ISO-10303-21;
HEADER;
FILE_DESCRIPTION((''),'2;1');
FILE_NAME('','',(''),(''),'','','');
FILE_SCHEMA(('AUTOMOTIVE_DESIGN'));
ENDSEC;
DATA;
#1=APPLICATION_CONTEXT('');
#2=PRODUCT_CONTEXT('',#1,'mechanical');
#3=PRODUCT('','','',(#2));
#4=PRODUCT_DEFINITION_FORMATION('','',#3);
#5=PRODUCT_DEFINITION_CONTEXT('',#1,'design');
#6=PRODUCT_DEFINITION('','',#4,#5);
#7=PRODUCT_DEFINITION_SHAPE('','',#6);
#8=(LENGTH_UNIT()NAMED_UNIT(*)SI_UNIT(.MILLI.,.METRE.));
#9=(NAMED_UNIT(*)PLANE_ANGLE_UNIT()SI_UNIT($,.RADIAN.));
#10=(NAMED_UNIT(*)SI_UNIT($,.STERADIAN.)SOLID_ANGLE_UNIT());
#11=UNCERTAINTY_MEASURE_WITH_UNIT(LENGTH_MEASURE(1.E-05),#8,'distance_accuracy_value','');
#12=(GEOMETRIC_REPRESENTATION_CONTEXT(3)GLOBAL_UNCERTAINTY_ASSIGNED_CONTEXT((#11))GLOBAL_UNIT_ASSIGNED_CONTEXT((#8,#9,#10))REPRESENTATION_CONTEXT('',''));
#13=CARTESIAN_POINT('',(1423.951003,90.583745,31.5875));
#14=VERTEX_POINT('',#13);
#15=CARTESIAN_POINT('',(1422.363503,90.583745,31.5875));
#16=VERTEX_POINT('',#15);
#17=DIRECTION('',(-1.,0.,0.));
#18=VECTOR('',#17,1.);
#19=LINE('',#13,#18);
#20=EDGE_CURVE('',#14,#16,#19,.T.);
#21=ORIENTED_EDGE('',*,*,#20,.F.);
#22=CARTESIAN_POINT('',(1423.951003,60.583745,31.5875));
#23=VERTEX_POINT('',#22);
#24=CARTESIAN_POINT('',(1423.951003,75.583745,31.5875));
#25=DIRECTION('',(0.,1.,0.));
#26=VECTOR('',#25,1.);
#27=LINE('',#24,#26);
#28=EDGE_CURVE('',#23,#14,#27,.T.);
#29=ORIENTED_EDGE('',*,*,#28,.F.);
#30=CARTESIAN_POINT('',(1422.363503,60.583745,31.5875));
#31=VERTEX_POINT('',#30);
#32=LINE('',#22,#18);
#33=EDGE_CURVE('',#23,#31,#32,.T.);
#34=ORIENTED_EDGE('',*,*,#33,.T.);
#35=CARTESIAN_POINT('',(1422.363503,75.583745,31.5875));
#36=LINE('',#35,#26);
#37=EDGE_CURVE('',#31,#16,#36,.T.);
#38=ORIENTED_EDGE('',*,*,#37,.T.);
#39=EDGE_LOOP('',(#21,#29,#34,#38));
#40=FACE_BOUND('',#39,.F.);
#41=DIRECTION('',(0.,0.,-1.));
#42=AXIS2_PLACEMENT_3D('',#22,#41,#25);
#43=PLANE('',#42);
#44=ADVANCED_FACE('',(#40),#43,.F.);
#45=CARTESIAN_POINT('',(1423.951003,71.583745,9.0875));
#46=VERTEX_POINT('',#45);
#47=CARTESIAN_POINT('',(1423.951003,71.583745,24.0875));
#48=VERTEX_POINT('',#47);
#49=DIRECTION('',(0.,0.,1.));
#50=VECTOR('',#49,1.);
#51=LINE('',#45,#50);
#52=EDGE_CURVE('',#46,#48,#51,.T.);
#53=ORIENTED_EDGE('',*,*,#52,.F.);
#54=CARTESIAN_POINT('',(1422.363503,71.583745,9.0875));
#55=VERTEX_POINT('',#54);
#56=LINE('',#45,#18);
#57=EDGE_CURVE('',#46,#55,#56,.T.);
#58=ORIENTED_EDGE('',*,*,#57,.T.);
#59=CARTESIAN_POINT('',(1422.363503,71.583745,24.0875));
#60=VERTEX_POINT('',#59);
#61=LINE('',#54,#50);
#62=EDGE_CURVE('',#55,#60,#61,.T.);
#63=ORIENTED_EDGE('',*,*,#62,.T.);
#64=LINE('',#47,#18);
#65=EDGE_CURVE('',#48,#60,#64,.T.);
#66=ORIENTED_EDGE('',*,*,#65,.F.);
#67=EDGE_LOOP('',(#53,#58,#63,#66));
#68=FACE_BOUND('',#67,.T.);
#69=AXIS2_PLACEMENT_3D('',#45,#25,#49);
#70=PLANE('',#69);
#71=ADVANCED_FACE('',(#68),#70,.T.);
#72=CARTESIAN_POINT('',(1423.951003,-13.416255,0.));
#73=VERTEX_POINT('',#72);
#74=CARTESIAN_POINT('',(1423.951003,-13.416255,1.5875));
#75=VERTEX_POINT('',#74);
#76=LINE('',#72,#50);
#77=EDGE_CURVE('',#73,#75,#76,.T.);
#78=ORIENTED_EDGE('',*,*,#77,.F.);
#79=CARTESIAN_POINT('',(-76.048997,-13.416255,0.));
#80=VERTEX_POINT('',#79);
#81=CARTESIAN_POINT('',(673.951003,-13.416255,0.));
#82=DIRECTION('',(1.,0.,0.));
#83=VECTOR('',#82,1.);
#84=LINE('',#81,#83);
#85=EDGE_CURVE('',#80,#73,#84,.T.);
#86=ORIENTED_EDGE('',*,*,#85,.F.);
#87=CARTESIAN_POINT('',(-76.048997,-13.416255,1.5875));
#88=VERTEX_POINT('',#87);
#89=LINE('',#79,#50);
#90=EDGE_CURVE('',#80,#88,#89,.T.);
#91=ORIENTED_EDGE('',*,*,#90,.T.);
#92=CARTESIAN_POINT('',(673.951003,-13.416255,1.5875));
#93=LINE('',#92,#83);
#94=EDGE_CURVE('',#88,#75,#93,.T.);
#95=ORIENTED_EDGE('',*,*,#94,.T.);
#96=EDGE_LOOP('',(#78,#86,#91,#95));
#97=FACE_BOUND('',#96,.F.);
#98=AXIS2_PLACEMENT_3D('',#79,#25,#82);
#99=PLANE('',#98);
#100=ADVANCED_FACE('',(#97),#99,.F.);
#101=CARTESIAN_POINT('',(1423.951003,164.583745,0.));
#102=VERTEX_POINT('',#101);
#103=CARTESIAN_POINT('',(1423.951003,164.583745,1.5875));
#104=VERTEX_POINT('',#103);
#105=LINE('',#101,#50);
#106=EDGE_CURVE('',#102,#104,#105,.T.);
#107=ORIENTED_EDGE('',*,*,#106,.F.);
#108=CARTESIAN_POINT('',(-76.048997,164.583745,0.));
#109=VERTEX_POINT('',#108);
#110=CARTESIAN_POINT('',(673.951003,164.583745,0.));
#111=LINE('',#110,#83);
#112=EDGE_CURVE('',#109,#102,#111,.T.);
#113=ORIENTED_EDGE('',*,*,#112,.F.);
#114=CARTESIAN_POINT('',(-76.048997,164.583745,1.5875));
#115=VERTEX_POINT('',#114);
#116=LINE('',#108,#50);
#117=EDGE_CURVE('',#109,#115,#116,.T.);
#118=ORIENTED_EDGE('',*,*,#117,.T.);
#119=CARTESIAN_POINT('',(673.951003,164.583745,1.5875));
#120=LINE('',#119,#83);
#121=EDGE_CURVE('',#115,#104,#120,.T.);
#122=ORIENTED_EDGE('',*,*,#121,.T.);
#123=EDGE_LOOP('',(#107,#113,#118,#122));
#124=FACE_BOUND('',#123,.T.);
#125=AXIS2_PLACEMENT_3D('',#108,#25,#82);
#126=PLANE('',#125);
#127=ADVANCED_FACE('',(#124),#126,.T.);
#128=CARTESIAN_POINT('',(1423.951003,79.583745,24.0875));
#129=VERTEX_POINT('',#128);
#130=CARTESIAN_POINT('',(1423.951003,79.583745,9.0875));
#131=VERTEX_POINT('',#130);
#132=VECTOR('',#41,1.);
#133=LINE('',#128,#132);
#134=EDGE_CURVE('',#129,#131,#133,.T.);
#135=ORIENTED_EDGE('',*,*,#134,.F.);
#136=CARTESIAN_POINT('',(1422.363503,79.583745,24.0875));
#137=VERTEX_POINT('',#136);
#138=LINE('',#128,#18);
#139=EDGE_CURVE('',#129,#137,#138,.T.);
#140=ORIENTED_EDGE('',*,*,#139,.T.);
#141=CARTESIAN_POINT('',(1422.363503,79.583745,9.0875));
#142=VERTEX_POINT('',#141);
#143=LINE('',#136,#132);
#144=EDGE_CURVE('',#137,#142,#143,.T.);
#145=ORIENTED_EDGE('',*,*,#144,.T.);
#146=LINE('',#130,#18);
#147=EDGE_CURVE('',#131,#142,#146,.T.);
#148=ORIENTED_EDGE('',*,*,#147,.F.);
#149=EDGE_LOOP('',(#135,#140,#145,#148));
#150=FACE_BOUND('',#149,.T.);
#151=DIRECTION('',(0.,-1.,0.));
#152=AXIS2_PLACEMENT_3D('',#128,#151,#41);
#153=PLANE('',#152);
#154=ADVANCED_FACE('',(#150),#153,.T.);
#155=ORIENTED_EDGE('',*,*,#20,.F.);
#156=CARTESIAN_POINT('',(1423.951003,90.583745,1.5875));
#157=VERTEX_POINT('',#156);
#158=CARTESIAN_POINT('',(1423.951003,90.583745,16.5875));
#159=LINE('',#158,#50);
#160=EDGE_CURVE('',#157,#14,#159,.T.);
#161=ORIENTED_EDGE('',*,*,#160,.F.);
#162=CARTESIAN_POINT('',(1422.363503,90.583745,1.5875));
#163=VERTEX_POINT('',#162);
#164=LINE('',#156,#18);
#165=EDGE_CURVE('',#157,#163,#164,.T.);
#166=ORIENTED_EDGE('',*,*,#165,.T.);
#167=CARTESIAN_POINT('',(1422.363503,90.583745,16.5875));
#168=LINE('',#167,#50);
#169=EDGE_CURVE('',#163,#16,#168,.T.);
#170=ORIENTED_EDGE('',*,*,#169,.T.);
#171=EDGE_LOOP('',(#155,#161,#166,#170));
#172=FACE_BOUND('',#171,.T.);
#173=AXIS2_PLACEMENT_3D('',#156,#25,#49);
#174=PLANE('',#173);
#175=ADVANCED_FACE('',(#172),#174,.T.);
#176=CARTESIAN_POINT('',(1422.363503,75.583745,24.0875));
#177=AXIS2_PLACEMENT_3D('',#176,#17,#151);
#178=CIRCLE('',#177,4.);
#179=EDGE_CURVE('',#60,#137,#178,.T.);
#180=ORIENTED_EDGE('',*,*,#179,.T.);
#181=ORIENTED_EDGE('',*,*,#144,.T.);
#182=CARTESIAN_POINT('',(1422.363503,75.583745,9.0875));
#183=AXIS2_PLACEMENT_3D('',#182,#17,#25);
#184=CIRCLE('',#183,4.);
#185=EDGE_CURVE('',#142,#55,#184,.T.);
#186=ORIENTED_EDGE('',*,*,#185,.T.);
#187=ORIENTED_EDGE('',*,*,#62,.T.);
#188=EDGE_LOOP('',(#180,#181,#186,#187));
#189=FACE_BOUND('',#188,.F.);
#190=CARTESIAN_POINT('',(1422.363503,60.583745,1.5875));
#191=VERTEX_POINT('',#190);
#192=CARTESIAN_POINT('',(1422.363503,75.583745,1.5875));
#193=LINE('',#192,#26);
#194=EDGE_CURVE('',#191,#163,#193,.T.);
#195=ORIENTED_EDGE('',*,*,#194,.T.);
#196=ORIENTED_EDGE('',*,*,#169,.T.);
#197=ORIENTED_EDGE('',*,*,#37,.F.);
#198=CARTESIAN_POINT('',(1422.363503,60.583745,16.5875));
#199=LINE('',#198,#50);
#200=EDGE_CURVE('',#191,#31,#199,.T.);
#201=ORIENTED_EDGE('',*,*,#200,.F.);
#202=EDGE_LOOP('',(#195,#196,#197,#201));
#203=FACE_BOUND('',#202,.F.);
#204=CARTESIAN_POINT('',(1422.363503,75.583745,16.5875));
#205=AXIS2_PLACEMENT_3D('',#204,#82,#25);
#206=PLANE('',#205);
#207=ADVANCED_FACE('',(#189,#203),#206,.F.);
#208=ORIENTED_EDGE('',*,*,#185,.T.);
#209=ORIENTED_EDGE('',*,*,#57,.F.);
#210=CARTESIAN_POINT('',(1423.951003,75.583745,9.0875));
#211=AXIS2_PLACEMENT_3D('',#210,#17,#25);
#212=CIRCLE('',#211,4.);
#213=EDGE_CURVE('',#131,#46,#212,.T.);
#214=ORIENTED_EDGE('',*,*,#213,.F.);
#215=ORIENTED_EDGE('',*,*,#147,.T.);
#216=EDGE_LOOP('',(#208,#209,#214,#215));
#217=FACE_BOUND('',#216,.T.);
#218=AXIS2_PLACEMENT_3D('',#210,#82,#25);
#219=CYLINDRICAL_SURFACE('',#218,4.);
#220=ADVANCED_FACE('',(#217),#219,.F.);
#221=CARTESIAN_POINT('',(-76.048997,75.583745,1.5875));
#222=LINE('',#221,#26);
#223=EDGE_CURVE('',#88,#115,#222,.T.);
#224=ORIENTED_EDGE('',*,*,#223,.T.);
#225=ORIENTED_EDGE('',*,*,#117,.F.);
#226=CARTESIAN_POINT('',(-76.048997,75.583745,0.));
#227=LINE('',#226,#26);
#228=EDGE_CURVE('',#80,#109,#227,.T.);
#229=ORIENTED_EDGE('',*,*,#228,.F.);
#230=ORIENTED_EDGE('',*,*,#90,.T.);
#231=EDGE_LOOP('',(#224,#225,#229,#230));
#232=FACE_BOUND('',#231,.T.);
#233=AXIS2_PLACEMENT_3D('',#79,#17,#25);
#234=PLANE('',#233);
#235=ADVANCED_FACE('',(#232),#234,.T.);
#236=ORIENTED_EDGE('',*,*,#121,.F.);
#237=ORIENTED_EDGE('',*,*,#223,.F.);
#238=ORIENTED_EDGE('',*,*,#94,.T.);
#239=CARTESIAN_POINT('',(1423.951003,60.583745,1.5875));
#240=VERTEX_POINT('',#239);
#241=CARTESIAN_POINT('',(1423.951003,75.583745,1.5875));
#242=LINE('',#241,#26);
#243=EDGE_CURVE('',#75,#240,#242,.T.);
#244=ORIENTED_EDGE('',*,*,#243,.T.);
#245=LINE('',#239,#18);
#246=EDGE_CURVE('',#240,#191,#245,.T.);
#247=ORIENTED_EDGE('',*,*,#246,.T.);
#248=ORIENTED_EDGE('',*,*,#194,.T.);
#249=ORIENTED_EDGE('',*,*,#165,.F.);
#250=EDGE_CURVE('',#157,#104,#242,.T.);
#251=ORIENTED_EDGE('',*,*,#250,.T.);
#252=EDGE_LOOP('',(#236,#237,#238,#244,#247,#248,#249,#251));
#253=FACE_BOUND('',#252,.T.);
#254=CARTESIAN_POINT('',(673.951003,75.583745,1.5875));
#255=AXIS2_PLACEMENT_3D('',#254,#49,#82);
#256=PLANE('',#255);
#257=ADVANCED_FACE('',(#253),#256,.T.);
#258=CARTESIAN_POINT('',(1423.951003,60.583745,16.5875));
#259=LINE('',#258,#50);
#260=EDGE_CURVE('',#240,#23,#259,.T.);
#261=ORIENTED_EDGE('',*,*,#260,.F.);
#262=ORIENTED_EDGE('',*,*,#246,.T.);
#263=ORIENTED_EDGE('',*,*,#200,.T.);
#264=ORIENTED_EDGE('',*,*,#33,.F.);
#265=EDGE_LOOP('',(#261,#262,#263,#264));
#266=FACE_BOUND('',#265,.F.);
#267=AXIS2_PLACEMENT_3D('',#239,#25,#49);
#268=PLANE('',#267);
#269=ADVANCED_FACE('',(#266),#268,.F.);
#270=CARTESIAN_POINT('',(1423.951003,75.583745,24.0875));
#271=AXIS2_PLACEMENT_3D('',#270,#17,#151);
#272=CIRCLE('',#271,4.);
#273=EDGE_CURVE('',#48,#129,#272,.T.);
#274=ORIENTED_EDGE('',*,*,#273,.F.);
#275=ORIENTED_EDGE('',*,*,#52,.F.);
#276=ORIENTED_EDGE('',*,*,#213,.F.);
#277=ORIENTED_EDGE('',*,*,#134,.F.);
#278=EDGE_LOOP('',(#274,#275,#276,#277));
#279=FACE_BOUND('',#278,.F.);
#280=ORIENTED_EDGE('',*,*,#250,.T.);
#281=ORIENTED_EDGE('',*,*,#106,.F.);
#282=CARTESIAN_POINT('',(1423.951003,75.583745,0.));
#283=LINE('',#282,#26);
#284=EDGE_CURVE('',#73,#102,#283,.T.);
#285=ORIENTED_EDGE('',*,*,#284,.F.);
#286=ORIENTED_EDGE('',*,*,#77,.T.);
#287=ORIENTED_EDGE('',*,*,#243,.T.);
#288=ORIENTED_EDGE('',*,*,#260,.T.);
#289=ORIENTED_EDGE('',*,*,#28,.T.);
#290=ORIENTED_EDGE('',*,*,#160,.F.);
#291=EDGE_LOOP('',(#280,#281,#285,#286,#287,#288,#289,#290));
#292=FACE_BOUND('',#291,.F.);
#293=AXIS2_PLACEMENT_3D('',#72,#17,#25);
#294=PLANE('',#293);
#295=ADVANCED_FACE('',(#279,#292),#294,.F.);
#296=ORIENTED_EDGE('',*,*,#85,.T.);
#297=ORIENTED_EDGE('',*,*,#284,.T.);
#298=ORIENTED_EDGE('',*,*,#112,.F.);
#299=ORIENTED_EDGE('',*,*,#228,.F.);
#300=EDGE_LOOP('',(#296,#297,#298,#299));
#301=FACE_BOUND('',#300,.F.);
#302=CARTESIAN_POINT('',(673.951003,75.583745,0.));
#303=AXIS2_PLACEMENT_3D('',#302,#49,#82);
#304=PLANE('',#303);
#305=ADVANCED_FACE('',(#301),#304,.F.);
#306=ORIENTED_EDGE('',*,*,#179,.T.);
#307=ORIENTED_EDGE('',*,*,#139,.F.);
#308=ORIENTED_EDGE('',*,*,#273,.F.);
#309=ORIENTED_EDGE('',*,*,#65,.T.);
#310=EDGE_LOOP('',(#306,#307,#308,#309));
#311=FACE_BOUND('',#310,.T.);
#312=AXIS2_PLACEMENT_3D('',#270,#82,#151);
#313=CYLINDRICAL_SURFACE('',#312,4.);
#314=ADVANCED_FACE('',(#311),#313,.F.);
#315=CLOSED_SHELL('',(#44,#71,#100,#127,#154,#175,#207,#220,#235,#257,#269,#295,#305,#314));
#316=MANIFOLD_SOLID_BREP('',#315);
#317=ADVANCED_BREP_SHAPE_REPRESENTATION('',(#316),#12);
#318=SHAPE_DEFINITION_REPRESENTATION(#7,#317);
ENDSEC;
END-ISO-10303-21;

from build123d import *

# Parameters (mm, degrees)
F0_W     = 1500
F0_H     = 178
F1_DEPTH = 1.5875
F2_W     = 30
F2_H     = 30
F3_DEPTH = 1.5875


# Not quite as in the source:
# - a length typed as a fraction of an inch, garbled in the dataset ("3 / 203.2 mm" for 3/8 in), is restored


with BuildPart() as f1:
    # F0 (on Top) → F1 (new body)
    with BuildSketch(Plane.XY):
        with Locations((673.9510029554, 75.5837445271)):
            Rectangle(F0_W, F0_H)
    extrude(amount=F1_DEPTH)

    # F2 (on face) → F3 (join)
    with BuildSketch(Plane.YZ.offset(1423.9510029554)):
        with Locations((75.5837445271, 16.5875)):
            Rectangle(F2_W, F2_H)
        with BuildLine():
            ThreePointArc((71.5837445271, 24.0875), (75.5837445271, 28.0875), (79.5837445271, 24.0875))
            Line((79.5837445271, 24.0875), (79.5837445271, 9.0875))
            ThreePointArc((79.5837445271, 9.0875), (75.5837445271, 5.0875), (71.5837445271, 9.0875))
            Line((71.5837445271, 9.0875), (71.5837445271, 24.0875))
        make_face(mode=Mode.SUBTRACT)
    extrude(amount=-F3_DEPTH)


solid = f1.part
